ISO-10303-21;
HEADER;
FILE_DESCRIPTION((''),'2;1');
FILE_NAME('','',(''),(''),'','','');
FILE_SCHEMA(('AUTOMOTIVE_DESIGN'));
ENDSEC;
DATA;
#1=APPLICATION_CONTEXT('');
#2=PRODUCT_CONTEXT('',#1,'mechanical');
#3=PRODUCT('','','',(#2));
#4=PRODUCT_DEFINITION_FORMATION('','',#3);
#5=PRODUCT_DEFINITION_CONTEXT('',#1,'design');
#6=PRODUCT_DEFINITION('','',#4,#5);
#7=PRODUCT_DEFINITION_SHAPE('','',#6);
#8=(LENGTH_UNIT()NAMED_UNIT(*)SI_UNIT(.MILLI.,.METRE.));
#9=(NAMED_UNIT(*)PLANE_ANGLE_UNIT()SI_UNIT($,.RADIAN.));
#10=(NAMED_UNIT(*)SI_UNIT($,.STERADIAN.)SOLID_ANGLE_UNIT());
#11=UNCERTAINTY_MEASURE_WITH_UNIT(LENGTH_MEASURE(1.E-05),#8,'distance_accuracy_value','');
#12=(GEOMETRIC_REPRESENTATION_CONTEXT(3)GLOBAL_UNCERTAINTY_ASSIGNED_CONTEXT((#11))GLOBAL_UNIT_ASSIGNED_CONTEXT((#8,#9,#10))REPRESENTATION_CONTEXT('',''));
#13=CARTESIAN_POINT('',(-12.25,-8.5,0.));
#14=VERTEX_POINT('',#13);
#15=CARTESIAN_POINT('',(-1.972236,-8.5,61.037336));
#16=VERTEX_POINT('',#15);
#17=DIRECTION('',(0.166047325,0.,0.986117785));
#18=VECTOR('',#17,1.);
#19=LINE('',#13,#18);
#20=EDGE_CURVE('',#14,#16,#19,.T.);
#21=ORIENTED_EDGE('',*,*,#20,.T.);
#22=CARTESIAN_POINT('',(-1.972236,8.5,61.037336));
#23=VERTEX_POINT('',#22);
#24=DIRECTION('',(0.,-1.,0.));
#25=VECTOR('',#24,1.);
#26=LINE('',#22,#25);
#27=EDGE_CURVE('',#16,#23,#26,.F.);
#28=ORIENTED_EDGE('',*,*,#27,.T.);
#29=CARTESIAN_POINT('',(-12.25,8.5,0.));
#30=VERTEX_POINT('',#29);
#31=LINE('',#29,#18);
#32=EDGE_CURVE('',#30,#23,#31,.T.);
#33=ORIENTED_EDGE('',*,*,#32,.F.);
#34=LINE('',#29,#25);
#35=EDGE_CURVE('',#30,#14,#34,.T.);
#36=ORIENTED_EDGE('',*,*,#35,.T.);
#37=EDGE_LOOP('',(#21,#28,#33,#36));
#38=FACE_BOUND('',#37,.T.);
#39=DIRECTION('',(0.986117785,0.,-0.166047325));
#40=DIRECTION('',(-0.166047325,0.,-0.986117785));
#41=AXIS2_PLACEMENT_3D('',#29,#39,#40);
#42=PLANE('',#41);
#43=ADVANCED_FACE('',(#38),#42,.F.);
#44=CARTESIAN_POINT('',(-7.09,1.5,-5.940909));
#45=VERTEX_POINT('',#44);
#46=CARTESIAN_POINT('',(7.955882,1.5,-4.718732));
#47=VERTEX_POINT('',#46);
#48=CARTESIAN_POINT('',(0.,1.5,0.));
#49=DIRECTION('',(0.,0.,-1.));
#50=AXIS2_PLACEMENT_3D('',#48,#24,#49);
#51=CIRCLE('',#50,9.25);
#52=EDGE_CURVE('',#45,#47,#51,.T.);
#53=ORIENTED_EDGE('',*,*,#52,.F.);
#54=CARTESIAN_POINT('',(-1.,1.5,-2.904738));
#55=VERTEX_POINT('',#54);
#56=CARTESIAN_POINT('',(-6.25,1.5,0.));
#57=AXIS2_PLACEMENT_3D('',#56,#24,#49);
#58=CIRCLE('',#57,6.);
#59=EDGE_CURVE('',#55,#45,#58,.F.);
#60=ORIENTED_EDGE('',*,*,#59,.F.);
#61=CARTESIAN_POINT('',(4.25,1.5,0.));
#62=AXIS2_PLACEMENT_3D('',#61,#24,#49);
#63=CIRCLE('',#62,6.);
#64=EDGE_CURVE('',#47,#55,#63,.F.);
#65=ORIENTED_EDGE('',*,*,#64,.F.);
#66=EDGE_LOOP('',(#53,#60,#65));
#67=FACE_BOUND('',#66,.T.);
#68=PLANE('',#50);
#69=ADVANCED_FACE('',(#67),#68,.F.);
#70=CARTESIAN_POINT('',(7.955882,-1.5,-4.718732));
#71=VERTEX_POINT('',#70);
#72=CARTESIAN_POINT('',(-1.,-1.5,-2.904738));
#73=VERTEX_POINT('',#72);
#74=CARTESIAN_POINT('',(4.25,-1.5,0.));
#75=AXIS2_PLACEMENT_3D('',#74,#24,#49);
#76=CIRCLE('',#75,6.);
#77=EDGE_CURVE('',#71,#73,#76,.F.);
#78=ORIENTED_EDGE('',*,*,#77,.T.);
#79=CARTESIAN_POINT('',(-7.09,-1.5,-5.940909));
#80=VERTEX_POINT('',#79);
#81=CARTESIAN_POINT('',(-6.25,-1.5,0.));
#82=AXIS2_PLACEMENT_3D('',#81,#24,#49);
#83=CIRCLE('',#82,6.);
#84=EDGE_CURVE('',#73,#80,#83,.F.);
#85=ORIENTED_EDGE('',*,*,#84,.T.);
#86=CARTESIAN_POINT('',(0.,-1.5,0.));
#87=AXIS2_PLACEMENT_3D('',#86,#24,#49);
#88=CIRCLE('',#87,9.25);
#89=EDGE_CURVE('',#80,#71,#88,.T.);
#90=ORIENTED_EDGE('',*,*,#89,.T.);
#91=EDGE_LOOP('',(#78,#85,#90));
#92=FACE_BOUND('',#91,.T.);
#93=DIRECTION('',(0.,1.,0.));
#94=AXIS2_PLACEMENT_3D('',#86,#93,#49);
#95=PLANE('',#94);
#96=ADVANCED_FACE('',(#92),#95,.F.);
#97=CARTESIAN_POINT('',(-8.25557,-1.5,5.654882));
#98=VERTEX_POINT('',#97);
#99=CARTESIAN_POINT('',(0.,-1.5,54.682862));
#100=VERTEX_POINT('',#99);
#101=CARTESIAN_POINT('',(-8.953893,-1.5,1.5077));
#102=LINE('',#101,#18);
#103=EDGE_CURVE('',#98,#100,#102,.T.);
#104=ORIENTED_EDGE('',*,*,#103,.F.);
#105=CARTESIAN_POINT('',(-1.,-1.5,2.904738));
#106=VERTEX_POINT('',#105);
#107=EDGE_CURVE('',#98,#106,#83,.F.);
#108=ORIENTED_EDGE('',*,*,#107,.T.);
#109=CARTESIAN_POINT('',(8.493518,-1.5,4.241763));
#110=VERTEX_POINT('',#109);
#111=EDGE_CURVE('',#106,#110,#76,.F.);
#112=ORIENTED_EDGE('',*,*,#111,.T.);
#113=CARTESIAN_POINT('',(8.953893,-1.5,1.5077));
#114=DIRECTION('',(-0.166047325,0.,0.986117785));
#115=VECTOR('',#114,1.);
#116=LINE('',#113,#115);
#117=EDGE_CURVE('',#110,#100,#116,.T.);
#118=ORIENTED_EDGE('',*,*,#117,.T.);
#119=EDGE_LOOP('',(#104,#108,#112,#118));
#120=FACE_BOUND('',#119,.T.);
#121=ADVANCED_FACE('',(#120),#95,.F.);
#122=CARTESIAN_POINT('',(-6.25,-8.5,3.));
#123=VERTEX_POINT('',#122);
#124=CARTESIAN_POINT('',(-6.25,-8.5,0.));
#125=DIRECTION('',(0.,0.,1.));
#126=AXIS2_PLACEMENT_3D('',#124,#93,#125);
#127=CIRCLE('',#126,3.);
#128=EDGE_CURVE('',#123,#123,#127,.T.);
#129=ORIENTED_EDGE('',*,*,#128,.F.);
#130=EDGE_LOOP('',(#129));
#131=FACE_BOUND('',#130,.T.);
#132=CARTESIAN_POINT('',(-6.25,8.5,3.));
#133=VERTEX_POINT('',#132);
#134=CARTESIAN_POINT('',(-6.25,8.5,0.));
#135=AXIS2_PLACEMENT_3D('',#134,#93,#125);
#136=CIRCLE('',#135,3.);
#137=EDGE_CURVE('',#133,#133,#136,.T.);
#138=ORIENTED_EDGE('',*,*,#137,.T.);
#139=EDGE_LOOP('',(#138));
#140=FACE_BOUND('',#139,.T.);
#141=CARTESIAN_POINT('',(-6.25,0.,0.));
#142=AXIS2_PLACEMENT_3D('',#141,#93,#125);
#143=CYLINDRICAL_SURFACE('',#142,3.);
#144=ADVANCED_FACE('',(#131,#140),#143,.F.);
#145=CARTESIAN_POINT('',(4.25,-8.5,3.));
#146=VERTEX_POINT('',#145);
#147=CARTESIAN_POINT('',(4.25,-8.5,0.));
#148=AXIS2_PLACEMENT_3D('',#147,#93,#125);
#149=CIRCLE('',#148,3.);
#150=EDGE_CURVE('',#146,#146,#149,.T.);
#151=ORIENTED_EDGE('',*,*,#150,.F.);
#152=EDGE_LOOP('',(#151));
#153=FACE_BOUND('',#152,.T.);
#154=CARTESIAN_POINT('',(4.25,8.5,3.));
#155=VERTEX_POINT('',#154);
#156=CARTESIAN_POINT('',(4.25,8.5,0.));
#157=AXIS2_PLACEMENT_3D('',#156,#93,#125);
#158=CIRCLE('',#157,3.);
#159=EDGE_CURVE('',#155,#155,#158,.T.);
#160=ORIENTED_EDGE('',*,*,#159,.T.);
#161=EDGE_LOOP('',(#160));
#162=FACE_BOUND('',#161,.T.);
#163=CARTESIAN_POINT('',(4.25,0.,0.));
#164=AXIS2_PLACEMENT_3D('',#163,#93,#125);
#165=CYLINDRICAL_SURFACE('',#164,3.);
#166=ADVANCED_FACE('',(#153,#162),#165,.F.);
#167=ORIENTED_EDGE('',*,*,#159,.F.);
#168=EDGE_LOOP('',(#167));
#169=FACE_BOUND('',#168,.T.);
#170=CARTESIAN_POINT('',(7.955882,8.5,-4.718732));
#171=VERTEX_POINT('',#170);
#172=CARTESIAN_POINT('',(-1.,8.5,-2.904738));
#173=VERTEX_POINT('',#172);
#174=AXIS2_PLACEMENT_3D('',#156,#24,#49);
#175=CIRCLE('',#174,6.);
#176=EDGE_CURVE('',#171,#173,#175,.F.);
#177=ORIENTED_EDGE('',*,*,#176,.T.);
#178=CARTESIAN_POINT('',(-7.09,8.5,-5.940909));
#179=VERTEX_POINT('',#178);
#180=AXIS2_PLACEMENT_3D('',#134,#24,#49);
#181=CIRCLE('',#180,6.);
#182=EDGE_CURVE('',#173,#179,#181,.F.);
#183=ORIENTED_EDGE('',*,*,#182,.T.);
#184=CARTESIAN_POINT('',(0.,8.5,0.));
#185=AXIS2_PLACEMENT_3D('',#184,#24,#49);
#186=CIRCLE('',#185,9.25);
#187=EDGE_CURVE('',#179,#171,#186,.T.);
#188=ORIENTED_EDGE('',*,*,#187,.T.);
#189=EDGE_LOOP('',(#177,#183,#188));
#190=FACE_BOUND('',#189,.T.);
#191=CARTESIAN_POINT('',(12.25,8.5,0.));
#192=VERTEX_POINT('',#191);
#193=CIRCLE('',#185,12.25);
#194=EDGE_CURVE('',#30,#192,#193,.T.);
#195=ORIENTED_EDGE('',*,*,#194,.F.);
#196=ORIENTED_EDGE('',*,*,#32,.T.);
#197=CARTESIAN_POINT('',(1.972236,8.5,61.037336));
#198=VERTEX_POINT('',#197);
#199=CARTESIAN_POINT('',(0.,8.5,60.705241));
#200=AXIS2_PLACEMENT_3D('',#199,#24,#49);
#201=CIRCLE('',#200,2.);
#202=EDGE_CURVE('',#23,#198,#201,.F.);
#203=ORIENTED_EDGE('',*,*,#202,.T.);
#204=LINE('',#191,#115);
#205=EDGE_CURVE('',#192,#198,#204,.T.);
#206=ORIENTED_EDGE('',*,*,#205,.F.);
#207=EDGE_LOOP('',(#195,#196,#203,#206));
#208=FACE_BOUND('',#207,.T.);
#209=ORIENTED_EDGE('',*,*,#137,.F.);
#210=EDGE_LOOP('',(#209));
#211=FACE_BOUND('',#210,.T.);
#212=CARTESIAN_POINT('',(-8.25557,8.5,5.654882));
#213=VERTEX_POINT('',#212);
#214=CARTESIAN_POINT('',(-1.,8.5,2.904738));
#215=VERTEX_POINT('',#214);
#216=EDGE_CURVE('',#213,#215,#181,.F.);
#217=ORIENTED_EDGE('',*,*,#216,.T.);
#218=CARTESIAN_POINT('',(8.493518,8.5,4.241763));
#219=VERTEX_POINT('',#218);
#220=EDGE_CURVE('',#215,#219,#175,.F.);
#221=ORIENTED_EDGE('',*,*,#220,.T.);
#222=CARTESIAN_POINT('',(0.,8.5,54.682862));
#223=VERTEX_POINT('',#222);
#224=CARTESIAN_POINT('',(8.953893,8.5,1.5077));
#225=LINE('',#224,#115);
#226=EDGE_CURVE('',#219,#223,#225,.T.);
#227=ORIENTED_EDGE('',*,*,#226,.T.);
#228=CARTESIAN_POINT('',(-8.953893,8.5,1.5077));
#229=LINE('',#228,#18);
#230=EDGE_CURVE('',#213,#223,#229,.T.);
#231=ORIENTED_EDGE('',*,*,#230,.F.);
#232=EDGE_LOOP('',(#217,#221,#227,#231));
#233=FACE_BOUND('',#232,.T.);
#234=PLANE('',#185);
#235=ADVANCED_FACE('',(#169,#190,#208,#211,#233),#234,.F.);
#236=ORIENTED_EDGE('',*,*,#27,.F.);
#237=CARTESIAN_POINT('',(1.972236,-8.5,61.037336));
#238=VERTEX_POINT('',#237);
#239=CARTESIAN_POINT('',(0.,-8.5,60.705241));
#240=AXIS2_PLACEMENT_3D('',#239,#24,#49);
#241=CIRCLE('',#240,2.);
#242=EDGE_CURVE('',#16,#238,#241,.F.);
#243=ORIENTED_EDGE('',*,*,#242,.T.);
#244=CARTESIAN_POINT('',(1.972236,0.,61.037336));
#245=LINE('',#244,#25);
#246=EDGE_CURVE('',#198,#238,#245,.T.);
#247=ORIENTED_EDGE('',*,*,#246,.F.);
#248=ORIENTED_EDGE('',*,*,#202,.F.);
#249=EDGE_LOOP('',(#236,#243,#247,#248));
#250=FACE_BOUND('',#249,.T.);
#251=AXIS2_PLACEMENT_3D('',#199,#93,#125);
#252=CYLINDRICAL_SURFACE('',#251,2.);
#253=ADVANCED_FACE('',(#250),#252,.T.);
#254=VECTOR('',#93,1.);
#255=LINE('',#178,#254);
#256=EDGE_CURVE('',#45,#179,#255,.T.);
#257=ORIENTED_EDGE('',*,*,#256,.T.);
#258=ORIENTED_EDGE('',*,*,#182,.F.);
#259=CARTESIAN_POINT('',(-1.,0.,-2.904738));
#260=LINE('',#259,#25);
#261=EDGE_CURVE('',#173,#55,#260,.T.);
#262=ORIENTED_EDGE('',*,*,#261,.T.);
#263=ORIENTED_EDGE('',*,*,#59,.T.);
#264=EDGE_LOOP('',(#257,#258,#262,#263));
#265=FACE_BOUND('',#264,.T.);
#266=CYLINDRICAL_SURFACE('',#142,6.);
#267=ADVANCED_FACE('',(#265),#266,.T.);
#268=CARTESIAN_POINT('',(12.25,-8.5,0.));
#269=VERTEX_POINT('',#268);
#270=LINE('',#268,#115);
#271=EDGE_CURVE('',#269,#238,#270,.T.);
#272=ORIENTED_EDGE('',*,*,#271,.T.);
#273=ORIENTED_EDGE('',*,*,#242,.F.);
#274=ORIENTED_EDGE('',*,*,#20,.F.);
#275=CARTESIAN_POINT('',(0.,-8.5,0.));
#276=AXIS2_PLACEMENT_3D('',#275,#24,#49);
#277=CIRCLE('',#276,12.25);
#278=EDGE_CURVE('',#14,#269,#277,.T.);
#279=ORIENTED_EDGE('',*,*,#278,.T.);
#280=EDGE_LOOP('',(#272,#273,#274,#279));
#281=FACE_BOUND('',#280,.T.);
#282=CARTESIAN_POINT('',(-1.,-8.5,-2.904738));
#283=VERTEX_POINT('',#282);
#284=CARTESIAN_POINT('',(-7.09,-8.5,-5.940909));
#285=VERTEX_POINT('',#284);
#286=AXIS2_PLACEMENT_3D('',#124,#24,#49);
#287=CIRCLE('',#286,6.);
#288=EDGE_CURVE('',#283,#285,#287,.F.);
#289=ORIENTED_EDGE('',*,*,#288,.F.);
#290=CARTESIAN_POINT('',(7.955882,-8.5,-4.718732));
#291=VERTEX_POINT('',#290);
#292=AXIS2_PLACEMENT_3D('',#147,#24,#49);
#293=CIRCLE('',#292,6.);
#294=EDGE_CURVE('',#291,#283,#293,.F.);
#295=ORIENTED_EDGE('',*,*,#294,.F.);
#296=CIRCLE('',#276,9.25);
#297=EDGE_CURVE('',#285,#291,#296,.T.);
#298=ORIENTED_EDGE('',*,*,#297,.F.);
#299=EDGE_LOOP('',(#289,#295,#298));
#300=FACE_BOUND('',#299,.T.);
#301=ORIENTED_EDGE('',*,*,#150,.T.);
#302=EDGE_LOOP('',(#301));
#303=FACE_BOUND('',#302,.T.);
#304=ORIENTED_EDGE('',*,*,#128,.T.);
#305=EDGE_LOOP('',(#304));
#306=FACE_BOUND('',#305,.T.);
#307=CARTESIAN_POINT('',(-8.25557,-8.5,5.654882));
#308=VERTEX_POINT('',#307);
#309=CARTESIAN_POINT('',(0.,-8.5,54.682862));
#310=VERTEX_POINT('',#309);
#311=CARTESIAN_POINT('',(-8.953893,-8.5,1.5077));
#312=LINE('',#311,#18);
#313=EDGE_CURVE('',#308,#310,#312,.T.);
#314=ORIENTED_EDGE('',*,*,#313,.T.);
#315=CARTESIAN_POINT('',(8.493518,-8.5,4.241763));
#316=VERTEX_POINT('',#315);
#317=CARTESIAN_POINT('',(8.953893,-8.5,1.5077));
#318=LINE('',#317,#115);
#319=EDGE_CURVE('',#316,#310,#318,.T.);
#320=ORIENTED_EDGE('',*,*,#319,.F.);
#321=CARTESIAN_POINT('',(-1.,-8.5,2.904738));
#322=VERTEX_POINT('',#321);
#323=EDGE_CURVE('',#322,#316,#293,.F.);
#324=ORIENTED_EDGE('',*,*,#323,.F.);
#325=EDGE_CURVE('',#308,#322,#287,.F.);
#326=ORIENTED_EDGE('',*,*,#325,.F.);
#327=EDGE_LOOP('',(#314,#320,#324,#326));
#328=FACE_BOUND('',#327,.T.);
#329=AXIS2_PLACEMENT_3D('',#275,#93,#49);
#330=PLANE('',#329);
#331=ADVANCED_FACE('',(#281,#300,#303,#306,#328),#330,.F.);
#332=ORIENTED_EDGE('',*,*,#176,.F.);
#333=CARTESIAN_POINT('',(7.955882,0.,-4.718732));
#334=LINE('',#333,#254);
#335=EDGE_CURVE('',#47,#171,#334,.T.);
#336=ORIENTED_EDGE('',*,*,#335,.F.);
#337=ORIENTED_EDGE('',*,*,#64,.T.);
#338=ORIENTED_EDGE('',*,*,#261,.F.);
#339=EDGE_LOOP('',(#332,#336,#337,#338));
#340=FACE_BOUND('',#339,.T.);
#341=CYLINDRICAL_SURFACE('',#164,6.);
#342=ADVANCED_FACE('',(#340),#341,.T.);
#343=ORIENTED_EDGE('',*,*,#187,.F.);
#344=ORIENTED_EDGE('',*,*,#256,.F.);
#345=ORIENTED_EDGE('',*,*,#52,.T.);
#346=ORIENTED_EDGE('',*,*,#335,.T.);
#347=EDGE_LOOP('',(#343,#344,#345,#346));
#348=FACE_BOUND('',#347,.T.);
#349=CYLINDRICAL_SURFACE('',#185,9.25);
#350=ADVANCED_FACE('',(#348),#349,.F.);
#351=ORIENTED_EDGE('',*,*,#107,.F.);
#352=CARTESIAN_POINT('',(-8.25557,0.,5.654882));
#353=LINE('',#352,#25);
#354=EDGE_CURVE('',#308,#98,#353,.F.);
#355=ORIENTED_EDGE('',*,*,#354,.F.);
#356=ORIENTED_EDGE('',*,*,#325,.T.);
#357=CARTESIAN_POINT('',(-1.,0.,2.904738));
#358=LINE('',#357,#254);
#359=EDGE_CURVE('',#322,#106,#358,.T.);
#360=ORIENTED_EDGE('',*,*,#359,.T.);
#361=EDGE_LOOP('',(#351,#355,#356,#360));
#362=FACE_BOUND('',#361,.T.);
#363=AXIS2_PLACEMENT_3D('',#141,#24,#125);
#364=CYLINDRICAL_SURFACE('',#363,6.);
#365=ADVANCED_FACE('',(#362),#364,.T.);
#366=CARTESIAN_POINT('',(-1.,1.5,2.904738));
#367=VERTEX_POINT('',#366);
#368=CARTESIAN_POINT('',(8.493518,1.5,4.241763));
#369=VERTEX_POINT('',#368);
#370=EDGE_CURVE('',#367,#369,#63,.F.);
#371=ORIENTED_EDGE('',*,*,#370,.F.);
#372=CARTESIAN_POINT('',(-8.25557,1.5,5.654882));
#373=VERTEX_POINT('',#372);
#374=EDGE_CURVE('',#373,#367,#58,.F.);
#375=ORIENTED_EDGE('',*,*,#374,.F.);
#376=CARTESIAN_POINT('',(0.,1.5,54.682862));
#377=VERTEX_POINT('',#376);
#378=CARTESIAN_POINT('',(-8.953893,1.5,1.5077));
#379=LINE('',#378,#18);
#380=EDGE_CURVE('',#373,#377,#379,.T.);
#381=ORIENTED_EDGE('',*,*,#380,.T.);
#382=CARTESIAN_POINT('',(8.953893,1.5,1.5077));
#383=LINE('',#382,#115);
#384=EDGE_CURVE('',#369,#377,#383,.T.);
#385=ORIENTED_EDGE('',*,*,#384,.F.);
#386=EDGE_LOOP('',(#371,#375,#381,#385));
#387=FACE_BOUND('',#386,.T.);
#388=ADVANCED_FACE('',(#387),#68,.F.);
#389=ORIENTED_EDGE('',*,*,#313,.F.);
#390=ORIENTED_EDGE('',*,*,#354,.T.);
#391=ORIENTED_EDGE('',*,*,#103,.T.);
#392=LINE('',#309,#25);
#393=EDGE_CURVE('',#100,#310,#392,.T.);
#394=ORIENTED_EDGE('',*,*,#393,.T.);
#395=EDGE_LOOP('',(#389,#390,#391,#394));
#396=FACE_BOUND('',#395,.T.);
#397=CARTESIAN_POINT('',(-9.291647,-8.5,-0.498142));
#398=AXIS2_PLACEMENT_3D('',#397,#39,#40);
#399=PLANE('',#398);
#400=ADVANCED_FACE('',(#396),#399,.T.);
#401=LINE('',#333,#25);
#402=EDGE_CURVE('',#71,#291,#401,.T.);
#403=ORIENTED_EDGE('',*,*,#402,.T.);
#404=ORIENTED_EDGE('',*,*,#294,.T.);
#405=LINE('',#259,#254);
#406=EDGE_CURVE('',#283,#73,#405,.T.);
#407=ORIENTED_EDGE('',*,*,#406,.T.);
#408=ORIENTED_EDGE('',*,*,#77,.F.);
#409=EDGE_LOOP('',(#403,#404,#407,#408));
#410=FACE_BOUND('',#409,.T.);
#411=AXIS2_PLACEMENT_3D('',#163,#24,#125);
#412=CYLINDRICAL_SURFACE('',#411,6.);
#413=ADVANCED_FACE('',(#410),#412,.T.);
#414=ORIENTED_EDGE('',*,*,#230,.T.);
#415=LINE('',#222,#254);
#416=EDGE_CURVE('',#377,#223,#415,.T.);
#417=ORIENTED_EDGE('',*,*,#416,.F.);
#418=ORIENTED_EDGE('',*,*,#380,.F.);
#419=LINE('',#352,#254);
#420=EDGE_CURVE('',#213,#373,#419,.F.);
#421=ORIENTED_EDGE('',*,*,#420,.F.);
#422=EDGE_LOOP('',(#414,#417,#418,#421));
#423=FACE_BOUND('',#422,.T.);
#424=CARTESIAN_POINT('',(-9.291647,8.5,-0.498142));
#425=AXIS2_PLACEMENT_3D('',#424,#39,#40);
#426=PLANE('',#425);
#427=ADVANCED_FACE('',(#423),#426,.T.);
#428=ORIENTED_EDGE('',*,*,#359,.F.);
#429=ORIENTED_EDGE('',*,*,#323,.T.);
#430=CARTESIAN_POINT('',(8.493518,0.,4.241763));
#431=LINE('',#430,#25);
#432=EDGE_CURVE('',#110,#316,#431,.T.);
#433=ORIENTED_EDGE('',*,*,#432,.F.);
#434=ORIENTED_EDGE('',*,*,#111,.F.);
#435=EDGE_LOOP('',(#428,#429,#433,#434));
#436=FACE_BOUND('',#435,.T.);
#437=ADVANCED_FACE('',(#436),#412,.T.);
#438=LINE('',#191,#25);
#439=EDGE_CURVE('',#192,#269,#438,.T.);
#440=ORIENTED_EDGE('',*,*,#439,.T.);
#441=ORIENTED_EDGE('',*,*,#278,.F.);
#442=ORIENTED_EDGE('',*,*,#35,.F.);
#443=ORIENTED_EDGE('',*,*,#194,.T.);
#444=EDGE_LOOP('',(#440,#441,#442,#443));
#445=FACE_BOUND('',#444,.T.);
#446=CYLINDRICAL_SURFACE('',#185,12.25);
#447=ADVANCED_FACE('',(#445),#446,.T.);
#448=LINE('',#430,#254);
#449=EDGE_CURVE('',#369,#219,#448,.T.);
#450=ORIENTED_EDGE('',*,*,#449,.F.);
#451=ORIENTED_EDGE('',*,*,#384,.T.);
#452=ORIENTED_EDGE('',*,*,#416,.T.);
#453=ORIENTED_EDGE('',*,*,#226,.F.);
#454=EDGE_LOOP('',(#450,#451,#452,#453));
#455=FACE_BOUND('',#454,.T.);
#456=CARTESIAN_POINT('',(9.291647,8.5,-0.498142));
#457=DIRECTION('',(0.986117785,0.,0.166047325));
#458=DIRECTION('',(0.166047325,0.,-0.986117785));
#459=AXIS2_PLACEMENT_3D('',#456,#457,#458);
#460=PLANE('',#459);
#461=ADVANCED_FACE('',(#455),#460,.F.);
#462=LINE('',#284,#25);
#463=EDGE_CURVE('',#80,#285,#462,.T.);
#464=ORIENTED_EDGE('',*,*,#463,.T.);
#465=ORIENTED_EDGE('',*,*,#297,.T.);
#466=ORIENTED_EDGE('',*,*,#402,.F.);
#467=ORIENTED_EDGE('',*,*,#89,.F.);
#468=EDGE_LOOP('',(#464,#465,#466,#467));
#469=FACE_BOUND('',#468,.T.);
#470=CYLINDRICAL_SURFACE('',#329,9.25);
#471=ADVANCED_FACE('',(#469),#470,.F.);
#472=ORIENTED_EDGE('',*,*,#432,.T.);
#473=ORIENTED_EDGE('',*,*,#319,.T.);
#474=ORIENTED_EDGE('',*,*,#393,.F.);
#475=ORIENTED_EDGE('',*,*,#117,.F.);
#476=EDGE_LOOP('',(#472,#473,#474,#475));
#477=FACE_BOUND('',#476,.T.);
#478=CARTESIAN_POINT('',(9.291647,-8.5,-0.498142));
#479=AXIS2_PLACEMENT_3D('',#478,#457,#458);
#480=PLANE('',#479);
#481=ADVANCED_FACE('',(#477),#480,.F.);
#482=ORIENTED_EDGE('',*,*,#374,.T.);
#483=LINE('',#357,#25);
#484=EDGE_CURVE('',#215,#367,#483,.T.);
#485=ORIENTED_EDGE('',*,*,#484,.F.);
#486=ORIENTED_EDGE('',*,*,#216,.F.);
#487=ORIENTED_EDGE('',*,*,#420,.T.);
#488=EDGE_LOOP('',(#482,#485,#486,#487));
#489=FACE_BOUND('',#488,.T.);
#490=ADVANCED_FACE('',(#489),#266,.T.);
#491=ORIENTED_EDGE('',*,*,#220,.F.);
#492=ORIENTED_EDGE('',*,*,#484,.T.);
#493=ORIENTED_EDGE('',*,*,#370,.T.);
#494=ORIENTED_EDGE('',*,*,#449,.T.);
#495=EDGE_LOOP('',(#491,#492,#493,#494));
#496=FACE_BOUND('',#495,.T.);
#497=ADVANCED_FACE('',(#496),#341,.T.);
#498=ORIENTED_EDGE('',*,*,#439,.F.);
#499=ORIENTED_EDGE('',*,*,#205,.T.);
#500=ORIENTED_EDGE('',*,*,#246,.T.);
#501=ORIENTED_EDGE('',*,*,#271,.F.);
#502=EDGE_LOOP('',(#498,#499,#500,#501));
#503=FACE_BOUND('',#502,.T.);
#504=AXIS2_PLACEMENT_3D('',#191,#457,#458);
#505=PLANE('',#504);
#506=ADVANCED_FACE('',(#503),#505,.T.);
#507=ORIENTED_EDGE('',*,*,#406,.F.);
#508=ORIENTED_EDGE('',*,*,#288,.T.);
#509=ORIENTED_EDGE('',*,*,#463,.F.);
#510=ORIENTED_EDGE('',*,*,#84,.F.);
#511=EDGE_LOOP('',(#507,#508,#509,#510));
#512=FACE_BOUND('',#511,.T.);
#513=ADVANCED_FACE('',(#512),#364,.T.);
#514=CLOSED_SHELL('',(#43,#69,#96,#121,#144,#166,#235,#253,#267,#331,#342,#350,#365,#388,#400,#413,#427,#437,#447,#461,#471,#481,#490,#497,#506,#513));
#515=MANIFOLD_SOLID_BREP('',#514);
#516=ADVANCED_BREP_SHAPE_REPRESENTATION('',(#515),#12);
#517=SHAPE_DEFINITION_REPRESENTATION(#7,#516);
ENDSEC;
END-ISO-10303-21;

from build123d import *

# Parameters (mm, degrees)
BOSS_EXTRU_1_DEPTH      = 8.5
CONG_2_R                = 2
ESQUISSE2_R             = 3
ENL_V_MAT_EXTRU_1_DEPTH = 65.453547263
COQUE3_START            = 1.5
COQUE3_DEPTH            = 7


# Read off the part's stored shape, not the designer's step: Coque3
with BuildPart() as part:
    # Esquisse1 → Boss.-Extru.1 (new body)
    with BuildSketch(Plane(origin=(0, 0, 0), x_dir=(1, 0, 0), z_dir=(0, 1, 0))):
        with BuildLine():
            Line((-12.25, 0), (0, -72.75))
            Line((0, -72.75), (12.25, 0))
            ThreePointArc((12.25, 0), (0, 12.25), (-12.25, 0))
        make_face()
    extrude(amount=BOSS_EXTRU_1_DEPTH)

    # Congé2
    cong_2_edges = [part.edges().sort_by_distance(p)[0] for p in [
        (0, 4.25, 72.75),
    ]]
    fillet(cong_2_edges, radius=CONG_2_R)

    # Esquisse2 → Enlèv. mat.-Extru.1 (cut, through all)
    with BuildSketch(Plane(origin=(0, 8.5, 0), x_dir=(1, 0, 0), z_dir=(0, 1, 0))):
        with Locations(Location((-6.25, 0, 0), (0, 0, 270))):
            Circle(ESQUISSE2_R)
        with Locations(Location((4.25, 0, 0), (0, 0, 270))):
            Circle(ESQUISSE2_R)
    extrude(amount=-ENL_V_MAT_EXTRU_1_DEPTH, mode=Mode.SUBTRACT)

    # Coque3 outline → Coque3 (cut)
    with BuildSketch(Plane(origin=(0, 0, 0), x_dir=(1, 0, 0), z_dir=(0, 1, 0)).offset(COQUE3_START)):
        with BuildLine():
            ThreePointArc((7.955882353, 4.718732455), (0.74891051, 9.219633021), (-7.09, 5.940909021))
            ThreePointArc((-7.09, 5.940909021), (-3.572947636, 5.369673234), (-1, 2.90473751))
            ThreePointArc((-1, 2.90473751), (3.058899986, 5.880585069), (7.955882353, 4.718732455))
        make_face()
        with BuildLine():
            ThreePointArc((8.493518341, -4.241762852), (3.413244048, -5.941366802), (-1, -2.90473751))
            ThreePointArc((-1, -2.90473751), (-4.123405548, -5.610489821), (-8.255570494, -5.654881696))
            Line((-8.255570494, -5.654881696), (0, -54.68286157))
            Line((0, -54.68286157), (8.493518341, -4.241762852))
        make_face()
    extrude(amount=COQUE3_DEPTH, mode=Mode.SUBTRACT)

    # Symétrie3: part across plane


with BuildPart() as part_1:
    add(part.part)
    add(part.part.mirror(Plane(origin=(0, 0, 0), x_dir=(0, 0, 1), z_dir=(0, -1, 0))))


solid = part_1.part
